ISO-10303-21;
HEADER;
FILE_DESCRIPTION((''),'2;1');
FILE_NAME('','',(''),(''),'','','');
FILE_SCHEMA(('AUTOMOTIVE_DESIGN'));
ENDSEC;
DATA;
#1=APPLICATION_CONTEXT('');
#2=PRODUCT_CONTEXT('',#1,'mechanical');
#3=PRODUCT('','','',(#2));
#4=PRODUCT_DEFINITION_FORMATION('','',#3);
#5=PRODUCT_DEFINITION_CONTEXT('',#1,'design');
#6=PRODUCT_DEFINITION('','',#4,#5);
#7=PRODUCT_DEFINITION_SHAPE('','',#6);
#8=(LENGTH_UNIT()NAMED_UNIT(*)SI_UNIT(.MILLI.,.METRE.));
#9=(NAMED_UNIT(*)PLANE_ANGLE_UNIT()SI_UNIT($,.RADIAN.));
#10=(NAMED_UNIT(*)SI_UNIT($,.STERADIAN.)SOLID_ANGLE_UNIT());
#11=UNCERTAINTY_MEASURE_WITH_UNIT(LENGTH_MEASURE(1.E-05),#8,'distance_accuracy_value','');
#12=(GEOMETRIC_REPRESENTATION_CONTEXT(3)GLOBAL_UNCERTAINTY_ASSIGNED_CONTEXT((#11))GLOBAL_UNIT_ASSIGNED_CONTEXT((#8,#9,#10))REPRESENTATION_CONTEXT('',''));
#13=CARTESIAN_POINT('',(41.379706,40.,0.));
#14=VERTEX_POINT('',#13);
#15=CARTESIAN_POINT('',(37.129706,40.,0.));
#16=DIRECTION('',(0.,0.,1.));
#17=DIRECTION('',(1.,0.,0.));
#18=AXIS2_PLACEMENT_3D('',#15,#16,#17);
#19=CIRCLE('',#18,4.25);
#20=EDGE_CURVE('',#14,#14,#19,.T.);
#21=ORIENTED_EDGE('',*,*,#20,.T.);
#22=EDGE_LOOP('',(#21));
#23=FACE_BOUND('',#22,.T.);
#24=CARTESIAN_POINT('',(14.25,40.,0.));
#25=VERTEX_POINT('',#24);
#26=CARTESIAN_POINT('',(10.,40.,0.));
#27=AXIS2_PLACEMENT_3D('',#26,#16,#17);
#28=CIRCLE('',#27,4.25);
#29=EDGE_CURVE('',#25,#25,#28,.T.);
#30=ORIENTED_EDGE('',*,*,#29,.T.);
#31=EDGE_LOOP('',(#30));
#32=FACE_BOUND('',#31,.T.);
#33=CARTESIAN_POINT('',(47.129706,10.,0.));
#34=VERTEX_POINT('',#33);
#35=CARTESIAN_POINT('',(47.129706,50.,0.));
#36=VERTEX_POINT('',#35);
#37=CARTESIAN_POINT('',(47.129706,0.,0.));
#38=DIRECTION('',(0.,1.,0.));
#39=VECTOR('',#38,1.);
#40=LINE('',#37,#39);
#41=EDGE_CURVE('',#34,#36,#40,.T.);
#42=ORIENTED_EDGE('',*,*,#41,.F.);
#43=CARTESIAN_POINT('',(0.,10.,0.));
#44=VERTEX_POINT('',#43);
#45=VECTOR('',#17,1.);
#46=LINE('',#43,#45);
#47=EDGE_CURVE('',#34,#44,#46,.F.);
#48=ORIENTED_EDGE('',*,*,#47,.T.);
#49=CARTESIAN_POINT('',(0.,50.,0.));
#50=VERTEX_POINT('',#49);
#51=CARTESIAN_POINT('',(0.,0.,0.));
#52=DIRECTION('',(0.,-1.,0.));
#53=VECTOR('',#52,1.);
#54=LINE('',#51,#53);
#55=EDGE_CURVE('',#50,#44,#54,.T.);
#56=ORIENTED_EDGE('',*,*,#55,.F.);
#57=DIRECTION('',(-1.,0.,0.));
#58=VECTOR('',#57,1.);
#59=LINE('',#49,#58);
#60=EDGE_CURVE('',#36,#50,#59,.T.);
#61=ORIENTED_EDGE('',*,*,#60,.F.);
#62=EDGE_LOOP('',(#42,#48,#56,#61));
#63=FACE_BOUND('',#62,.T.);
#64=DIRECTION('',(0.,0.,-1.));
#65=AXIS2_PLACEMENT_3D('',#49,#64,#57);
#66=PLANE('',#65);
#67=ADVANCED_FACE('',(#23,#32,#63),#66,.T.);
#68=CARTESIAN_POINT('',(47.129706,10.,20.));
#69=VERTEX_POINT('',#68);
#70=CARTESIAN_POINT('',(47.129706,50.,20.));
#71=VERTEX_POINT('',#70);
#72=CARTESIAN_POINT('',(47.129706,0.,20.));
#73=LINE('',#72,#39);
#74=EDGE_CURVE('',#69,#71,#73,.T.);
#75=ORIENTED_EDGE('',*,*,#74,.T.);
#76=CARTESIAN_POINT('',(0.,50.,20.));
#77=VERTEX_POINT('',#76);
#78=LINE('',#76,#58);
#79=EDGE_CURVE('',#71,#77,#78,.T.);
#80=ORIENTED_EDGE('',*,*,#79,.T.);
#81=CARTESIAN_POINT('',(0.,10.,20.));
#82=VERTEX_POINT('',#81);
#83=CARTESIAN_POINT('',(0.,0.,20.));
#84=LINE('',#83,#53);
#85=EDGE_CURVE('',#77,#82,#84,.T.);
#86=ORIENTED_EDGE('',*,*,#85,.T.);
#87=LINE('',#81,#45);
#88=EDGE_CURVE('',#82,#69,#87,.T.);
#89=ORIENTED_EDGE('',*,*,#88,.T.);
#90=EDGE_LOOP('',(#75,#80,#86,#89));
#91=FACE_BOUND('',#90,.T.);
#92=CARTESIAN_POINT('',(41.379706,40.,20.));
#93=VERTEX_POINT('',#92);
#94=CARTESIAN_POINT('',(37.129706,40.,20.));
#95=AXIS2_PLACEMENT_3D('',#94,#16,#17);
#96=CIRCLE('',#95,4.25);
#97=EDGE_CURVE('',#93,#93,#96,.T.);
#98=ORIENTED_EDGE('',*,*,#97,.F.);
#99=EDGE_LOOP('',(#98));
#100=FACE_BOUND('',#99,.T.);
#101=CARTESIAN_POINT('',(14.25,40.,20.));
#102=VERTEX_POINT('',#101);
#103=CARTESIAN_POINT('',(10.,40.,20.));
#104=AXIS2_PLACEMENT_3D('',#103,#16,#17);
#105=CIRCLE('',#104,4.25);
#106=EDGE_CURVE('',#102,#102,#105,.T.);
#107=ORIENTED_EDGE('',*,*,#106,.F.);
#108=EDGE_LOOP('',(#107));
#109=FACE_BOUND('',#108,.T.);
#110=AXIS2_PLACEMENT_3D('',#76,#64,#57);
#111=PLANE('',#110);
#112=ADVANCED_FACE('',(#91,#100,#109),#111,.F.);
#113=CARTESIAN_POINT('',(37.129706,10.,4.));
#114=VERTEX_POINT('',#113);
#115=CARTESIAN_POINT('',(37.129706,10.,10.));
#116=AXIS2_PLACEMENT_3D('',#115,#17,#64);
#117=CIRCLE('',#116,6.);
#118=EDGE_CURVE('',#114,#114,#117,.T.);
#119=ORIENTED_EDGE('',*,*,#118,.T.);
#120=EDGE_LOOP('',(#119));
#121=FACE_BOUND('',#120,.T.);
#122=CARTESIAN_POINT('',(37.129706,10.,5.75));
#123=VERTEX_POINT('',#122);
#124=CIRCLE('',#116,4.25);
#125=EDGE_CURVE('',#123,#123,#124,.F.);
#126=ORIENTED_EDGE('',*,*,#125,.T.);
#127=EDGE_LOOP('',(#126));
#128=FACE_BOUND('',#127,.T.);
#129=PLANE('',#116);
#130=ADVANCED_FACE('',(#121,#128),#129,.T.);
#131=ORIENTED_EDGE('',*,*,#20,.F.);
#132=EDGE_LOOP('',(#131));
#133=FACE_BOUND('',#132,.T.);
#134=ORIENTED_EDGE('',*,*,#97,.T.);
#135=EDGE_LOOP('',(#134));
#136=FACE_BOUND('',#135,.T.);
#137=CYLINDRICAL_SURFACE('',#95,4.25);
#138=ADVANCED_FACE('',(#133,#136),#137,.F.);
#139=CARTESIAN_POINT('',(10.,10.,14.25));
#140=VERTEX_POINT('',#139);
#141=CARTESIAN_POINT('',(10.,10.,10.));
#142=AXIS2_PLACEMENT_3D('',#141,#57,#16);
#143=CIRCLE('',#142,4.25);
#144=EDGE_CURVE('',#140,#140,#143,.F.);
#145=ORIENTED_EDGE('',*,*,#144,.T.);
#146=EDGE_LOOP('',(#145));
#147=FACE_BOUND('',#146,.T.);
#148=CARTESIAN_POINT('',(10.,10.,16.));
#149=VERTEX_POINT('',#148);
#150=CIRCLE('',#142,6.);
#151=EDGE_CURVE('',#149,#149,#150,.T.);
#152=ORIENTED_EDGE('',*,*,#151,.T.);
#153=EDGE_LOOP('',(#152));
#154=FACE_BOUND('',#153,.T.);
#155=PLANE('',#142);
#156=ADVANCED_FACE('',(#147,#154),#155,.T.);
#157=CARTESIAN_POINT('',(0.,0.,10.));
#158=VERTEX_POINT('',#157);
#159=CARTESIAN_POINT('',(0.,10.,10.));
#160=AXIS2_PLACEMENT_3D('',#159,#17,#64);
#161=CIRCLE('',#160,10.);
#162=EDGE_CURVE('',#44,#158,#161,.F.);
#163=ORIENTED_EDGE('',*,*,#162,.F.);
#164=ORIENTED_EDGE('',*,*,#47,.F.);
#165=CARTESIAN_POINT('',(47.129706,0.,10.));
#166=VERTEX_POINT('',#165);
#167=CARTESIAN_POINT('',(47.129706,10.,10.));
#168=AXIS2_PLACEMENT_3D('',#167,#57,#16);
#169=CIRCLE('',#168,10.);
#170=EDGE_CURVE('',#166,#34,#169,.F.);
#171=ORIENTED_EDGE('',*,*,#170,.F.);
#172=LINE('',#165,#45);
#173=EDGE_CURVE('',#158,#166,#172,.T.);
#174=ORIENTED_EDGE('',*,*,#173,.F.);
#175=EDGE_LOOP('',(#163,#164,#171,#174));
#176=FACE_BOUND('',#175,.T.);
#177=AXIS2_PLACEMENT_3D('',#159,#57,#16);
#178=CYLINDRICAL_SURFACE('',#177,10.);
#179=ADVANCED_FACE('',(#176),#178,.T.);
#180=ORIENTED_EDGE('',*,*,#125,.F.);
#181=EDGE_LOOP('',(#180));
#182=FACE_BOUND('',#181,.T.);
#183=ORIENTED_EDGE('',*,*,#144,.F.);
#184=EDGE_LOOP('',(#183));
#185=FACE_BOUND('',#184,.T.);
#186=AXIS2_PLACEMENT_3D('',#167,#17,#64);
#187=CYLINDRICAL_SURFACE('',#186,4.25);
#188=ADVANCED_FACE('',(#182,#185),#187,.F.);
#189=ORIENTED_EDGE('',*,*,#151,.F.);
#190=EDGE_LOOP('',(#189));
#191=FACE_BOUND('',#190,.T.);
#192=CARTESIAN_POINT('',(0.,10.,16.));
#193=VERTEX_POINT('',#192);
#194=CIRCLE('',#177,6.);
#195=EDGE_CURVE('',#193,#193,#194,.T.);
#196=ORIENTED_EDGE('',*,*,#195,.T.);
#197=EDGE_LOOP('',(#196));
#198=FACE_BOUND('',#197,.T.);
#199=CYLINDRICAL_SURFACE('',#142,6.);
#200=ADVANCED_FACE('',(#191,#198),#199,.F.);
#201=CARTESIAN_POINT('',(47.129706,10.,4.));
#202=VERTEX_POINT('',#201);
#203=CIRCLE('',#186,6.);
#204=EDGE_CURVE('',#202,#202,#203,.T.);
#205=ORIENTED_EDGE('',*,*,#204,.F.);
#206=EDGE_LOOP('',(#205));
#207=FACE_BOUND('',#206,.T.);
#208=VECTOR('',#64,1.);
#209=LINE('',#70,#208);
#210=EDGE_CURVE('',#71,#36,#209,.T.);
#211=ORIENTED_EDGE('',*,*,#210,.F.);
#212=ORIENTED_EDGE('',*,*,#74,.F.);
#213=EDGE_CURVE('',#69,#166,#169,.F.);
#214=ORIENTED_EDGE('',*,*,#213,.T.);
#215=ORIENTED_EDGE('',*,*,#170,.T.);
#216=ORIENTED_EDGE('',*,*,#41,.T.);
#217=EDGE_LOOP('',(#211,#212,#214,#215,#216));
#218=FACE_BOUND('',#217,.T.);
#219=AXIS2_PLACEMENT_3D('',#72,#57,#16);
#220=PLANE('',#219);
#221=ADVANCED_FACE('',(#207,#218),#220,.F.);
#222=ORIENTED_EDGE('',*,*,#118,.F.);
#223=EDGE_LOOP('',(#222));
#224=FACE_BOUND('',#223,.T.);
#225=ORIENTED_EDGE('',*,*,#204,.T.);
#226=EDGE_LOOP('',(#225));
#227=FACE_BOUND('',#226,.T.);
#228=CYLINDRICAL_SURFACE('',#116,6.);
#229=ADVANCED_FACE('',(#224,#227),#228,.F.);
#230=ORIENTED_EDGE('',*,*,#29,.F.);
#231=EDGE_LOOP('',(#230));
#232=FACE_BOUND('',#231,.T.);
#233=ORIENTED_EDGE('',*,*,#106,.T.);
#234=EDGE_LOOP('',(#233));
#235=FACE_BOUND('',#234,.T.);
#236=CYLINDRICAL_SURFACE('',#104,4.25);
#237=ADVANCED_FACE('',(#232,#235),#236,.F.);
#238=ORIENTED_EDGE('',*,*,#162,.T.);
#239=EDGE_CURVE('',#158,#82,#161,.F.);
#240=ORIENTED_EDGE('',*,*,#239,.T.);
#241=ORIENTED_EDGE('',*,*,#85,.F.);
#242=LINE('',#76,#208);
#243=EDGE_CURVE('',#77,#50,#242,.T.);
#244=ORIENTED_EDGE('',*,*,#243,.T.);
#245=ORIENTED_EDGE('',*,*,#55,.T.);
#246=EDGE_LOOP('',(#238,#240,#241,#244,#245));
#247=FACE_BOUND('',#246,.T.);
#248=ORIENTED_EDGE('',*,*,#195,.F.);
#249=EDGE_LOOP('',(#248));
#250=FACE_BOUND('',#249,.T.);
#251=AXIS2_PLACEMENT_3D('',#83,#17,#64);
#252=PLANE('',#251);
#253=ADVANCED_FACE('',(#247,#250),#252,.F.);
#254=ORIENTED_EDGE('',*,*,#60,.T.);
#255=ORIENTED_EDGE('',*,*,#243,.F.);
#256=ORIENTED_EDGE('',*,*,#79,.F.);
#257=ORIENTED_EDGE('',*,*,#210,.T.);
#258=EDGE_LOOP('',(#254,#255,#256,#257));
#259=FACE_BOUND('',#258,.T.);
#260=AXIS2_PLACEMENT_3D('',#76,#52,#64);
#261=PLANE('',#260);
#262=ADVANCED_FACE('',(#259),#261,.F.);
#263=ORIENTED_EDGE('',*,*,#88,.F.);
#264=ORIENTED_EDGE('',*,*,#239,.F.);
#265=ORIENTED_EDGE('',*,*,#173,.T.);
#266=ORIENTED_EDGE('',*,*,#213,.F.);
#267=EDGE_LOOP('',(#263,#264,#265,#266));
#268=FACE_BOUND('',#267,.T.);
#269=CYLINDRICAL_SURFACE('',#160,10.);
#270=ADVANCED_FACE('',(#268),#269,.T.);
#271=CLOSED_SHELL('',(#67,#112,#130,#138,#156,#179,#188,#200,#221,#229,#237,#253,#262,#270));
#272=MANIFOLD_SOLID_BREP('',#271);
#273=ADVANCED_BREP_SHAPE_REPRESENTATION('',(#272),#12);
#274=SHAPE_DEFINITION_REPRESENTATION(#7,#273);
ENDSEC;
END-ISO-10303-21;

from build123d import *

# Parameters (mm, degrees)
SKETCH1_W                      = 47.129705535
SKETCH1_H                      = 50
EXTRUDE1_DEPTH                 = 20
F_8_5_8_5_DIAMETER_HOLE1_D     = 8.5
F_8_5_8_5_DIAMETER_HOLE1_DEPTH = 47.13
F_8_5_8_5_DIAMETER_HOLE1_TIP   = 2.553657631
SKETCH4_R                      = 6
EXTRUDE2_DEPTH                 = 10
EXTRUDE3_START                 = -10
SKETCH3_R                      = 6
EXTRUDE3_DEPTH                 = 10
F_8_5_8_5_DIAMETER_HOLE2_D     = 8.5
FILLET1_R                      = 10


with BuildPart() as part:
    # Sketch1 → Extrude1 (new body)
    with BuildSketch(Plane.XY):
        with Locations((23.564852768, 25)):
            Rectangle(SKETCH1_W, SKETCH1_H)
    extrude(amount=EXTRUDE1_DEPTH)

    # Ø8.5 (8.5) Diameter Hole1
    with Locations(Plane(origin=(47.129705535, 10, 10), x_dir=(0, 0, 1), z_dir=(1, 0, 0))):
        with Locations((0, 0)):
            Hole(F_8_5_8_5_DIAMETER_HOLE1_D / 2, depth=F_8_5_8_5_DIAMETER_HOLE1_DEPTH)
            with Locations((0, 0, -(F_8_5_8_5_DIAMETER_HOLE1_DEPTH + F_8_5_8_5_DIAMETER_HOLE1_TIP / 2))):  # 118° drill point
                Cone(0, F_8_5_8_5_DIAMETER_HOLE1_D / 2, F_8_5_8_5_DIAMETER_HOLE1_TIP, mode=Mode.SUBTRACT)

    # Sketch4 → Extrude2 (cut)
    with BuildSketch(Plane.ZY):
        with Locations((10, 10)):
            Circle(SKETCH4_R)
    extrude(amount=-EXTRUDE2_DEPTH, mode=Mode.SUBTRACT)

    # Sketch3 → Extrude3 (cut)
    with BuildSketch(Plane(origin=(47.129705535, 0, 0), x_dir=(0, 0, -1), z_dir=(1, 0, 0)).offset(EXTRUDE3_START)):
        with Locations(Location((-10, 10, 0), (0, 0, 180))):
            Circle(SKETCH3_R)
    extrude(amount=EXTRUDE3_DEPTH, mode=Mode.SUBTRACT)

    # Ø8.5 (8.5) Diameter Hole2 (through all)
    with Locations(Plane(origin=(37.129705535, 40, 20), x_dir=(1, 0, 0), z_dir=(0, 0, 1))):
        with Locations((0, 0), (-27.129705535, 0)):
            Hole(F_8_5_8_5_DIAMETER_HOLE2_D / 2)

    # Fillet1
    fillet1_edges = [part.edges().sort_by_distance(p)[0] for p in [
        (23.564852768, 0, 20),
        (23.564852768, 0, 0),
    ]]
    fillet(fillet1_edges, radius=FILLET1_R - 0.0001)  # a hair under: the kernel refuses the full size


solid = part.part
